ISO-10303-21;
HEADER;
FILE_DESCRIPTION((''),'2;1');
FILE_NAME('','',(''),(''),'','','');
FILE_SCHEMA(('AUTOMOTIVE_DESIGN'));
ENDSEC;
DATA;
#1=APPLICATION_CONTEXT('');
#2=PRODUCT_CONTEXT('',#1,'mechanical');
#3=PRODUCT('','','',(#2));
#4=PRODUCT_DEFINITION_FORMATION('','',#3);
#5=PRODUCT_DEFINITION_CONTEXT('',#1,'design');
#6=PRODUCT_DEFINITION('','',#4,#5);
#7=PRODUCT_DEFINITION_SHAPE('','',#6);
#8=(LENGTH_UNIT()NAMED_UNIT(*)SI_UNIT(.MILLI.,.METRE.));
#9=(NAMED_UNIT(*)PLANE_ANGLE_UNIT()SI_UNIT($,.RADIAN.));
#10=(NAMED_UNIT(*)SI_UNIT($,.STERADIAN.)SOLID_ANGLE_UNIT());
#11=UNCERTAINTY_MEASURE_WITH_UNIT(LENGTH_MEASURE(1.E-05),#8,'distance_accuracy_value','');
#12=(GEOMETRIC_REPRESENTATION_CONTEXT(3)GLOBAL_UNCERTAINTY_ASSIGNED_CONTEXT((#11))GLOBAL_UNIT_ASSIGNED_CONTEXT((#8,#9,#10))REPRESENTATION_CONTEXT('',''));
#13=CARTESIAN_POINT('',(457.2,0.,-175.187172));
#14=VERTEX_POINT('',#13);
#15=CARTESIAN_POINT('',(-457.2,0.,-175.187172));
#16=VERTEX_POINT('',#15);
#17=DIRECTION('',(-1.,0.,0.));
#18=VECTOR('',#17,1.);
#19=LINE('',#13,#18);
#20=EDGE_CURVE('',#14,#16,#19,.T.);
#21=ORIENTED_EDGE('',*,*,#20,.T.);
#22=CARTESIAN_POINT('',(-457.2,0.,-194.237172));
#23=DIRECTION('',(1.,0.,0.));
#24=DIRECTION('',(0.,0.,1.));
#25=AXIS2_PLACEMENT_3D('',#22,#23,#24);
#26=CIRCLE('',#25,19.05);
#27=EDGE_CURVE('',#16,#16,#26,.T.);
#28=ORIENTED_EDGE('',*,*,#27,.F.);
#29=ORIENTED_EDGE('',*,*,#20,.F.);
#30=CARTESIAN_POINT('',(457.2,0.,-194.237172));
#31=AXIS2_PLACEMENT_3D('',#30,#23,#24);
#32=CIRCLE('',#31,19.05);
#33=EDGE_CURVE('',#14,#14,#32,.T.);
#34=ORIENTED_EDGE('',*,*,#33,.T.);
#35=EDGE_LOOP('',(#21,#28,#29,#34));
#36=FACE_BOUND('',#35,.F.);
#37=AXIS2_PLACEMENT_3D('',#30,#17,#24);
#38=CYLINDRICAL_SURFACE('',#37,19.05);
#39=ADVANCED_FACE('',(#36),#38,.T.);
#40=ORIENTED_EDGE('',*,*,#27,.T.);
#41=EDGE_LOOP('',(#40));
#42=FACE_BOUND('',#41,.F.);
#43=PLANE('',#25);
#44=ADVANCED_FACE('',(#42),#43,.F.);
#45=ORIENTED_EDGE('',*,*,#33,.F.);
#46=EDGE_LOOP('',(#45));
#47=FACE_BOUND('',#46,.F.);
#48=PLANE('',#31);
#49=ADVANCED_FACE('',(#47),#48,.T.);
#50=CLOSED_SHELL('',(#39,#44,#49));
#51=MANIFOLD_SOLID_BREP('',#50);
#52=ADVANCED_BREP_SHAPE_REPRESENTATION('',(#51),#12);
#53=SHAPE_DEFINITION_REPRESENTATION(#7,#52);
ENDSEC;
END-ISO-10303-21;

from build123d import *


# Not quite as in the source:
# - the program builds the solid bodies; features that only make, move or delete a surface that nothing else refers to are left out


with BuildPart() as f2:
    # F0 (on Front) → F2 (revolve)
    with BuildSketch(Plane.XZ):
        Polygon((-457.2, -175.1871720561), (-457.2, -194.2371720561), (457.2, -194.2371720561), (457.2, -175.1871720561), (0, -175.1871720561), align=None)
    revolve(axis=Axis((0, 0, -194.2371720561), (1, 0, 0)))


solid = f2.part
